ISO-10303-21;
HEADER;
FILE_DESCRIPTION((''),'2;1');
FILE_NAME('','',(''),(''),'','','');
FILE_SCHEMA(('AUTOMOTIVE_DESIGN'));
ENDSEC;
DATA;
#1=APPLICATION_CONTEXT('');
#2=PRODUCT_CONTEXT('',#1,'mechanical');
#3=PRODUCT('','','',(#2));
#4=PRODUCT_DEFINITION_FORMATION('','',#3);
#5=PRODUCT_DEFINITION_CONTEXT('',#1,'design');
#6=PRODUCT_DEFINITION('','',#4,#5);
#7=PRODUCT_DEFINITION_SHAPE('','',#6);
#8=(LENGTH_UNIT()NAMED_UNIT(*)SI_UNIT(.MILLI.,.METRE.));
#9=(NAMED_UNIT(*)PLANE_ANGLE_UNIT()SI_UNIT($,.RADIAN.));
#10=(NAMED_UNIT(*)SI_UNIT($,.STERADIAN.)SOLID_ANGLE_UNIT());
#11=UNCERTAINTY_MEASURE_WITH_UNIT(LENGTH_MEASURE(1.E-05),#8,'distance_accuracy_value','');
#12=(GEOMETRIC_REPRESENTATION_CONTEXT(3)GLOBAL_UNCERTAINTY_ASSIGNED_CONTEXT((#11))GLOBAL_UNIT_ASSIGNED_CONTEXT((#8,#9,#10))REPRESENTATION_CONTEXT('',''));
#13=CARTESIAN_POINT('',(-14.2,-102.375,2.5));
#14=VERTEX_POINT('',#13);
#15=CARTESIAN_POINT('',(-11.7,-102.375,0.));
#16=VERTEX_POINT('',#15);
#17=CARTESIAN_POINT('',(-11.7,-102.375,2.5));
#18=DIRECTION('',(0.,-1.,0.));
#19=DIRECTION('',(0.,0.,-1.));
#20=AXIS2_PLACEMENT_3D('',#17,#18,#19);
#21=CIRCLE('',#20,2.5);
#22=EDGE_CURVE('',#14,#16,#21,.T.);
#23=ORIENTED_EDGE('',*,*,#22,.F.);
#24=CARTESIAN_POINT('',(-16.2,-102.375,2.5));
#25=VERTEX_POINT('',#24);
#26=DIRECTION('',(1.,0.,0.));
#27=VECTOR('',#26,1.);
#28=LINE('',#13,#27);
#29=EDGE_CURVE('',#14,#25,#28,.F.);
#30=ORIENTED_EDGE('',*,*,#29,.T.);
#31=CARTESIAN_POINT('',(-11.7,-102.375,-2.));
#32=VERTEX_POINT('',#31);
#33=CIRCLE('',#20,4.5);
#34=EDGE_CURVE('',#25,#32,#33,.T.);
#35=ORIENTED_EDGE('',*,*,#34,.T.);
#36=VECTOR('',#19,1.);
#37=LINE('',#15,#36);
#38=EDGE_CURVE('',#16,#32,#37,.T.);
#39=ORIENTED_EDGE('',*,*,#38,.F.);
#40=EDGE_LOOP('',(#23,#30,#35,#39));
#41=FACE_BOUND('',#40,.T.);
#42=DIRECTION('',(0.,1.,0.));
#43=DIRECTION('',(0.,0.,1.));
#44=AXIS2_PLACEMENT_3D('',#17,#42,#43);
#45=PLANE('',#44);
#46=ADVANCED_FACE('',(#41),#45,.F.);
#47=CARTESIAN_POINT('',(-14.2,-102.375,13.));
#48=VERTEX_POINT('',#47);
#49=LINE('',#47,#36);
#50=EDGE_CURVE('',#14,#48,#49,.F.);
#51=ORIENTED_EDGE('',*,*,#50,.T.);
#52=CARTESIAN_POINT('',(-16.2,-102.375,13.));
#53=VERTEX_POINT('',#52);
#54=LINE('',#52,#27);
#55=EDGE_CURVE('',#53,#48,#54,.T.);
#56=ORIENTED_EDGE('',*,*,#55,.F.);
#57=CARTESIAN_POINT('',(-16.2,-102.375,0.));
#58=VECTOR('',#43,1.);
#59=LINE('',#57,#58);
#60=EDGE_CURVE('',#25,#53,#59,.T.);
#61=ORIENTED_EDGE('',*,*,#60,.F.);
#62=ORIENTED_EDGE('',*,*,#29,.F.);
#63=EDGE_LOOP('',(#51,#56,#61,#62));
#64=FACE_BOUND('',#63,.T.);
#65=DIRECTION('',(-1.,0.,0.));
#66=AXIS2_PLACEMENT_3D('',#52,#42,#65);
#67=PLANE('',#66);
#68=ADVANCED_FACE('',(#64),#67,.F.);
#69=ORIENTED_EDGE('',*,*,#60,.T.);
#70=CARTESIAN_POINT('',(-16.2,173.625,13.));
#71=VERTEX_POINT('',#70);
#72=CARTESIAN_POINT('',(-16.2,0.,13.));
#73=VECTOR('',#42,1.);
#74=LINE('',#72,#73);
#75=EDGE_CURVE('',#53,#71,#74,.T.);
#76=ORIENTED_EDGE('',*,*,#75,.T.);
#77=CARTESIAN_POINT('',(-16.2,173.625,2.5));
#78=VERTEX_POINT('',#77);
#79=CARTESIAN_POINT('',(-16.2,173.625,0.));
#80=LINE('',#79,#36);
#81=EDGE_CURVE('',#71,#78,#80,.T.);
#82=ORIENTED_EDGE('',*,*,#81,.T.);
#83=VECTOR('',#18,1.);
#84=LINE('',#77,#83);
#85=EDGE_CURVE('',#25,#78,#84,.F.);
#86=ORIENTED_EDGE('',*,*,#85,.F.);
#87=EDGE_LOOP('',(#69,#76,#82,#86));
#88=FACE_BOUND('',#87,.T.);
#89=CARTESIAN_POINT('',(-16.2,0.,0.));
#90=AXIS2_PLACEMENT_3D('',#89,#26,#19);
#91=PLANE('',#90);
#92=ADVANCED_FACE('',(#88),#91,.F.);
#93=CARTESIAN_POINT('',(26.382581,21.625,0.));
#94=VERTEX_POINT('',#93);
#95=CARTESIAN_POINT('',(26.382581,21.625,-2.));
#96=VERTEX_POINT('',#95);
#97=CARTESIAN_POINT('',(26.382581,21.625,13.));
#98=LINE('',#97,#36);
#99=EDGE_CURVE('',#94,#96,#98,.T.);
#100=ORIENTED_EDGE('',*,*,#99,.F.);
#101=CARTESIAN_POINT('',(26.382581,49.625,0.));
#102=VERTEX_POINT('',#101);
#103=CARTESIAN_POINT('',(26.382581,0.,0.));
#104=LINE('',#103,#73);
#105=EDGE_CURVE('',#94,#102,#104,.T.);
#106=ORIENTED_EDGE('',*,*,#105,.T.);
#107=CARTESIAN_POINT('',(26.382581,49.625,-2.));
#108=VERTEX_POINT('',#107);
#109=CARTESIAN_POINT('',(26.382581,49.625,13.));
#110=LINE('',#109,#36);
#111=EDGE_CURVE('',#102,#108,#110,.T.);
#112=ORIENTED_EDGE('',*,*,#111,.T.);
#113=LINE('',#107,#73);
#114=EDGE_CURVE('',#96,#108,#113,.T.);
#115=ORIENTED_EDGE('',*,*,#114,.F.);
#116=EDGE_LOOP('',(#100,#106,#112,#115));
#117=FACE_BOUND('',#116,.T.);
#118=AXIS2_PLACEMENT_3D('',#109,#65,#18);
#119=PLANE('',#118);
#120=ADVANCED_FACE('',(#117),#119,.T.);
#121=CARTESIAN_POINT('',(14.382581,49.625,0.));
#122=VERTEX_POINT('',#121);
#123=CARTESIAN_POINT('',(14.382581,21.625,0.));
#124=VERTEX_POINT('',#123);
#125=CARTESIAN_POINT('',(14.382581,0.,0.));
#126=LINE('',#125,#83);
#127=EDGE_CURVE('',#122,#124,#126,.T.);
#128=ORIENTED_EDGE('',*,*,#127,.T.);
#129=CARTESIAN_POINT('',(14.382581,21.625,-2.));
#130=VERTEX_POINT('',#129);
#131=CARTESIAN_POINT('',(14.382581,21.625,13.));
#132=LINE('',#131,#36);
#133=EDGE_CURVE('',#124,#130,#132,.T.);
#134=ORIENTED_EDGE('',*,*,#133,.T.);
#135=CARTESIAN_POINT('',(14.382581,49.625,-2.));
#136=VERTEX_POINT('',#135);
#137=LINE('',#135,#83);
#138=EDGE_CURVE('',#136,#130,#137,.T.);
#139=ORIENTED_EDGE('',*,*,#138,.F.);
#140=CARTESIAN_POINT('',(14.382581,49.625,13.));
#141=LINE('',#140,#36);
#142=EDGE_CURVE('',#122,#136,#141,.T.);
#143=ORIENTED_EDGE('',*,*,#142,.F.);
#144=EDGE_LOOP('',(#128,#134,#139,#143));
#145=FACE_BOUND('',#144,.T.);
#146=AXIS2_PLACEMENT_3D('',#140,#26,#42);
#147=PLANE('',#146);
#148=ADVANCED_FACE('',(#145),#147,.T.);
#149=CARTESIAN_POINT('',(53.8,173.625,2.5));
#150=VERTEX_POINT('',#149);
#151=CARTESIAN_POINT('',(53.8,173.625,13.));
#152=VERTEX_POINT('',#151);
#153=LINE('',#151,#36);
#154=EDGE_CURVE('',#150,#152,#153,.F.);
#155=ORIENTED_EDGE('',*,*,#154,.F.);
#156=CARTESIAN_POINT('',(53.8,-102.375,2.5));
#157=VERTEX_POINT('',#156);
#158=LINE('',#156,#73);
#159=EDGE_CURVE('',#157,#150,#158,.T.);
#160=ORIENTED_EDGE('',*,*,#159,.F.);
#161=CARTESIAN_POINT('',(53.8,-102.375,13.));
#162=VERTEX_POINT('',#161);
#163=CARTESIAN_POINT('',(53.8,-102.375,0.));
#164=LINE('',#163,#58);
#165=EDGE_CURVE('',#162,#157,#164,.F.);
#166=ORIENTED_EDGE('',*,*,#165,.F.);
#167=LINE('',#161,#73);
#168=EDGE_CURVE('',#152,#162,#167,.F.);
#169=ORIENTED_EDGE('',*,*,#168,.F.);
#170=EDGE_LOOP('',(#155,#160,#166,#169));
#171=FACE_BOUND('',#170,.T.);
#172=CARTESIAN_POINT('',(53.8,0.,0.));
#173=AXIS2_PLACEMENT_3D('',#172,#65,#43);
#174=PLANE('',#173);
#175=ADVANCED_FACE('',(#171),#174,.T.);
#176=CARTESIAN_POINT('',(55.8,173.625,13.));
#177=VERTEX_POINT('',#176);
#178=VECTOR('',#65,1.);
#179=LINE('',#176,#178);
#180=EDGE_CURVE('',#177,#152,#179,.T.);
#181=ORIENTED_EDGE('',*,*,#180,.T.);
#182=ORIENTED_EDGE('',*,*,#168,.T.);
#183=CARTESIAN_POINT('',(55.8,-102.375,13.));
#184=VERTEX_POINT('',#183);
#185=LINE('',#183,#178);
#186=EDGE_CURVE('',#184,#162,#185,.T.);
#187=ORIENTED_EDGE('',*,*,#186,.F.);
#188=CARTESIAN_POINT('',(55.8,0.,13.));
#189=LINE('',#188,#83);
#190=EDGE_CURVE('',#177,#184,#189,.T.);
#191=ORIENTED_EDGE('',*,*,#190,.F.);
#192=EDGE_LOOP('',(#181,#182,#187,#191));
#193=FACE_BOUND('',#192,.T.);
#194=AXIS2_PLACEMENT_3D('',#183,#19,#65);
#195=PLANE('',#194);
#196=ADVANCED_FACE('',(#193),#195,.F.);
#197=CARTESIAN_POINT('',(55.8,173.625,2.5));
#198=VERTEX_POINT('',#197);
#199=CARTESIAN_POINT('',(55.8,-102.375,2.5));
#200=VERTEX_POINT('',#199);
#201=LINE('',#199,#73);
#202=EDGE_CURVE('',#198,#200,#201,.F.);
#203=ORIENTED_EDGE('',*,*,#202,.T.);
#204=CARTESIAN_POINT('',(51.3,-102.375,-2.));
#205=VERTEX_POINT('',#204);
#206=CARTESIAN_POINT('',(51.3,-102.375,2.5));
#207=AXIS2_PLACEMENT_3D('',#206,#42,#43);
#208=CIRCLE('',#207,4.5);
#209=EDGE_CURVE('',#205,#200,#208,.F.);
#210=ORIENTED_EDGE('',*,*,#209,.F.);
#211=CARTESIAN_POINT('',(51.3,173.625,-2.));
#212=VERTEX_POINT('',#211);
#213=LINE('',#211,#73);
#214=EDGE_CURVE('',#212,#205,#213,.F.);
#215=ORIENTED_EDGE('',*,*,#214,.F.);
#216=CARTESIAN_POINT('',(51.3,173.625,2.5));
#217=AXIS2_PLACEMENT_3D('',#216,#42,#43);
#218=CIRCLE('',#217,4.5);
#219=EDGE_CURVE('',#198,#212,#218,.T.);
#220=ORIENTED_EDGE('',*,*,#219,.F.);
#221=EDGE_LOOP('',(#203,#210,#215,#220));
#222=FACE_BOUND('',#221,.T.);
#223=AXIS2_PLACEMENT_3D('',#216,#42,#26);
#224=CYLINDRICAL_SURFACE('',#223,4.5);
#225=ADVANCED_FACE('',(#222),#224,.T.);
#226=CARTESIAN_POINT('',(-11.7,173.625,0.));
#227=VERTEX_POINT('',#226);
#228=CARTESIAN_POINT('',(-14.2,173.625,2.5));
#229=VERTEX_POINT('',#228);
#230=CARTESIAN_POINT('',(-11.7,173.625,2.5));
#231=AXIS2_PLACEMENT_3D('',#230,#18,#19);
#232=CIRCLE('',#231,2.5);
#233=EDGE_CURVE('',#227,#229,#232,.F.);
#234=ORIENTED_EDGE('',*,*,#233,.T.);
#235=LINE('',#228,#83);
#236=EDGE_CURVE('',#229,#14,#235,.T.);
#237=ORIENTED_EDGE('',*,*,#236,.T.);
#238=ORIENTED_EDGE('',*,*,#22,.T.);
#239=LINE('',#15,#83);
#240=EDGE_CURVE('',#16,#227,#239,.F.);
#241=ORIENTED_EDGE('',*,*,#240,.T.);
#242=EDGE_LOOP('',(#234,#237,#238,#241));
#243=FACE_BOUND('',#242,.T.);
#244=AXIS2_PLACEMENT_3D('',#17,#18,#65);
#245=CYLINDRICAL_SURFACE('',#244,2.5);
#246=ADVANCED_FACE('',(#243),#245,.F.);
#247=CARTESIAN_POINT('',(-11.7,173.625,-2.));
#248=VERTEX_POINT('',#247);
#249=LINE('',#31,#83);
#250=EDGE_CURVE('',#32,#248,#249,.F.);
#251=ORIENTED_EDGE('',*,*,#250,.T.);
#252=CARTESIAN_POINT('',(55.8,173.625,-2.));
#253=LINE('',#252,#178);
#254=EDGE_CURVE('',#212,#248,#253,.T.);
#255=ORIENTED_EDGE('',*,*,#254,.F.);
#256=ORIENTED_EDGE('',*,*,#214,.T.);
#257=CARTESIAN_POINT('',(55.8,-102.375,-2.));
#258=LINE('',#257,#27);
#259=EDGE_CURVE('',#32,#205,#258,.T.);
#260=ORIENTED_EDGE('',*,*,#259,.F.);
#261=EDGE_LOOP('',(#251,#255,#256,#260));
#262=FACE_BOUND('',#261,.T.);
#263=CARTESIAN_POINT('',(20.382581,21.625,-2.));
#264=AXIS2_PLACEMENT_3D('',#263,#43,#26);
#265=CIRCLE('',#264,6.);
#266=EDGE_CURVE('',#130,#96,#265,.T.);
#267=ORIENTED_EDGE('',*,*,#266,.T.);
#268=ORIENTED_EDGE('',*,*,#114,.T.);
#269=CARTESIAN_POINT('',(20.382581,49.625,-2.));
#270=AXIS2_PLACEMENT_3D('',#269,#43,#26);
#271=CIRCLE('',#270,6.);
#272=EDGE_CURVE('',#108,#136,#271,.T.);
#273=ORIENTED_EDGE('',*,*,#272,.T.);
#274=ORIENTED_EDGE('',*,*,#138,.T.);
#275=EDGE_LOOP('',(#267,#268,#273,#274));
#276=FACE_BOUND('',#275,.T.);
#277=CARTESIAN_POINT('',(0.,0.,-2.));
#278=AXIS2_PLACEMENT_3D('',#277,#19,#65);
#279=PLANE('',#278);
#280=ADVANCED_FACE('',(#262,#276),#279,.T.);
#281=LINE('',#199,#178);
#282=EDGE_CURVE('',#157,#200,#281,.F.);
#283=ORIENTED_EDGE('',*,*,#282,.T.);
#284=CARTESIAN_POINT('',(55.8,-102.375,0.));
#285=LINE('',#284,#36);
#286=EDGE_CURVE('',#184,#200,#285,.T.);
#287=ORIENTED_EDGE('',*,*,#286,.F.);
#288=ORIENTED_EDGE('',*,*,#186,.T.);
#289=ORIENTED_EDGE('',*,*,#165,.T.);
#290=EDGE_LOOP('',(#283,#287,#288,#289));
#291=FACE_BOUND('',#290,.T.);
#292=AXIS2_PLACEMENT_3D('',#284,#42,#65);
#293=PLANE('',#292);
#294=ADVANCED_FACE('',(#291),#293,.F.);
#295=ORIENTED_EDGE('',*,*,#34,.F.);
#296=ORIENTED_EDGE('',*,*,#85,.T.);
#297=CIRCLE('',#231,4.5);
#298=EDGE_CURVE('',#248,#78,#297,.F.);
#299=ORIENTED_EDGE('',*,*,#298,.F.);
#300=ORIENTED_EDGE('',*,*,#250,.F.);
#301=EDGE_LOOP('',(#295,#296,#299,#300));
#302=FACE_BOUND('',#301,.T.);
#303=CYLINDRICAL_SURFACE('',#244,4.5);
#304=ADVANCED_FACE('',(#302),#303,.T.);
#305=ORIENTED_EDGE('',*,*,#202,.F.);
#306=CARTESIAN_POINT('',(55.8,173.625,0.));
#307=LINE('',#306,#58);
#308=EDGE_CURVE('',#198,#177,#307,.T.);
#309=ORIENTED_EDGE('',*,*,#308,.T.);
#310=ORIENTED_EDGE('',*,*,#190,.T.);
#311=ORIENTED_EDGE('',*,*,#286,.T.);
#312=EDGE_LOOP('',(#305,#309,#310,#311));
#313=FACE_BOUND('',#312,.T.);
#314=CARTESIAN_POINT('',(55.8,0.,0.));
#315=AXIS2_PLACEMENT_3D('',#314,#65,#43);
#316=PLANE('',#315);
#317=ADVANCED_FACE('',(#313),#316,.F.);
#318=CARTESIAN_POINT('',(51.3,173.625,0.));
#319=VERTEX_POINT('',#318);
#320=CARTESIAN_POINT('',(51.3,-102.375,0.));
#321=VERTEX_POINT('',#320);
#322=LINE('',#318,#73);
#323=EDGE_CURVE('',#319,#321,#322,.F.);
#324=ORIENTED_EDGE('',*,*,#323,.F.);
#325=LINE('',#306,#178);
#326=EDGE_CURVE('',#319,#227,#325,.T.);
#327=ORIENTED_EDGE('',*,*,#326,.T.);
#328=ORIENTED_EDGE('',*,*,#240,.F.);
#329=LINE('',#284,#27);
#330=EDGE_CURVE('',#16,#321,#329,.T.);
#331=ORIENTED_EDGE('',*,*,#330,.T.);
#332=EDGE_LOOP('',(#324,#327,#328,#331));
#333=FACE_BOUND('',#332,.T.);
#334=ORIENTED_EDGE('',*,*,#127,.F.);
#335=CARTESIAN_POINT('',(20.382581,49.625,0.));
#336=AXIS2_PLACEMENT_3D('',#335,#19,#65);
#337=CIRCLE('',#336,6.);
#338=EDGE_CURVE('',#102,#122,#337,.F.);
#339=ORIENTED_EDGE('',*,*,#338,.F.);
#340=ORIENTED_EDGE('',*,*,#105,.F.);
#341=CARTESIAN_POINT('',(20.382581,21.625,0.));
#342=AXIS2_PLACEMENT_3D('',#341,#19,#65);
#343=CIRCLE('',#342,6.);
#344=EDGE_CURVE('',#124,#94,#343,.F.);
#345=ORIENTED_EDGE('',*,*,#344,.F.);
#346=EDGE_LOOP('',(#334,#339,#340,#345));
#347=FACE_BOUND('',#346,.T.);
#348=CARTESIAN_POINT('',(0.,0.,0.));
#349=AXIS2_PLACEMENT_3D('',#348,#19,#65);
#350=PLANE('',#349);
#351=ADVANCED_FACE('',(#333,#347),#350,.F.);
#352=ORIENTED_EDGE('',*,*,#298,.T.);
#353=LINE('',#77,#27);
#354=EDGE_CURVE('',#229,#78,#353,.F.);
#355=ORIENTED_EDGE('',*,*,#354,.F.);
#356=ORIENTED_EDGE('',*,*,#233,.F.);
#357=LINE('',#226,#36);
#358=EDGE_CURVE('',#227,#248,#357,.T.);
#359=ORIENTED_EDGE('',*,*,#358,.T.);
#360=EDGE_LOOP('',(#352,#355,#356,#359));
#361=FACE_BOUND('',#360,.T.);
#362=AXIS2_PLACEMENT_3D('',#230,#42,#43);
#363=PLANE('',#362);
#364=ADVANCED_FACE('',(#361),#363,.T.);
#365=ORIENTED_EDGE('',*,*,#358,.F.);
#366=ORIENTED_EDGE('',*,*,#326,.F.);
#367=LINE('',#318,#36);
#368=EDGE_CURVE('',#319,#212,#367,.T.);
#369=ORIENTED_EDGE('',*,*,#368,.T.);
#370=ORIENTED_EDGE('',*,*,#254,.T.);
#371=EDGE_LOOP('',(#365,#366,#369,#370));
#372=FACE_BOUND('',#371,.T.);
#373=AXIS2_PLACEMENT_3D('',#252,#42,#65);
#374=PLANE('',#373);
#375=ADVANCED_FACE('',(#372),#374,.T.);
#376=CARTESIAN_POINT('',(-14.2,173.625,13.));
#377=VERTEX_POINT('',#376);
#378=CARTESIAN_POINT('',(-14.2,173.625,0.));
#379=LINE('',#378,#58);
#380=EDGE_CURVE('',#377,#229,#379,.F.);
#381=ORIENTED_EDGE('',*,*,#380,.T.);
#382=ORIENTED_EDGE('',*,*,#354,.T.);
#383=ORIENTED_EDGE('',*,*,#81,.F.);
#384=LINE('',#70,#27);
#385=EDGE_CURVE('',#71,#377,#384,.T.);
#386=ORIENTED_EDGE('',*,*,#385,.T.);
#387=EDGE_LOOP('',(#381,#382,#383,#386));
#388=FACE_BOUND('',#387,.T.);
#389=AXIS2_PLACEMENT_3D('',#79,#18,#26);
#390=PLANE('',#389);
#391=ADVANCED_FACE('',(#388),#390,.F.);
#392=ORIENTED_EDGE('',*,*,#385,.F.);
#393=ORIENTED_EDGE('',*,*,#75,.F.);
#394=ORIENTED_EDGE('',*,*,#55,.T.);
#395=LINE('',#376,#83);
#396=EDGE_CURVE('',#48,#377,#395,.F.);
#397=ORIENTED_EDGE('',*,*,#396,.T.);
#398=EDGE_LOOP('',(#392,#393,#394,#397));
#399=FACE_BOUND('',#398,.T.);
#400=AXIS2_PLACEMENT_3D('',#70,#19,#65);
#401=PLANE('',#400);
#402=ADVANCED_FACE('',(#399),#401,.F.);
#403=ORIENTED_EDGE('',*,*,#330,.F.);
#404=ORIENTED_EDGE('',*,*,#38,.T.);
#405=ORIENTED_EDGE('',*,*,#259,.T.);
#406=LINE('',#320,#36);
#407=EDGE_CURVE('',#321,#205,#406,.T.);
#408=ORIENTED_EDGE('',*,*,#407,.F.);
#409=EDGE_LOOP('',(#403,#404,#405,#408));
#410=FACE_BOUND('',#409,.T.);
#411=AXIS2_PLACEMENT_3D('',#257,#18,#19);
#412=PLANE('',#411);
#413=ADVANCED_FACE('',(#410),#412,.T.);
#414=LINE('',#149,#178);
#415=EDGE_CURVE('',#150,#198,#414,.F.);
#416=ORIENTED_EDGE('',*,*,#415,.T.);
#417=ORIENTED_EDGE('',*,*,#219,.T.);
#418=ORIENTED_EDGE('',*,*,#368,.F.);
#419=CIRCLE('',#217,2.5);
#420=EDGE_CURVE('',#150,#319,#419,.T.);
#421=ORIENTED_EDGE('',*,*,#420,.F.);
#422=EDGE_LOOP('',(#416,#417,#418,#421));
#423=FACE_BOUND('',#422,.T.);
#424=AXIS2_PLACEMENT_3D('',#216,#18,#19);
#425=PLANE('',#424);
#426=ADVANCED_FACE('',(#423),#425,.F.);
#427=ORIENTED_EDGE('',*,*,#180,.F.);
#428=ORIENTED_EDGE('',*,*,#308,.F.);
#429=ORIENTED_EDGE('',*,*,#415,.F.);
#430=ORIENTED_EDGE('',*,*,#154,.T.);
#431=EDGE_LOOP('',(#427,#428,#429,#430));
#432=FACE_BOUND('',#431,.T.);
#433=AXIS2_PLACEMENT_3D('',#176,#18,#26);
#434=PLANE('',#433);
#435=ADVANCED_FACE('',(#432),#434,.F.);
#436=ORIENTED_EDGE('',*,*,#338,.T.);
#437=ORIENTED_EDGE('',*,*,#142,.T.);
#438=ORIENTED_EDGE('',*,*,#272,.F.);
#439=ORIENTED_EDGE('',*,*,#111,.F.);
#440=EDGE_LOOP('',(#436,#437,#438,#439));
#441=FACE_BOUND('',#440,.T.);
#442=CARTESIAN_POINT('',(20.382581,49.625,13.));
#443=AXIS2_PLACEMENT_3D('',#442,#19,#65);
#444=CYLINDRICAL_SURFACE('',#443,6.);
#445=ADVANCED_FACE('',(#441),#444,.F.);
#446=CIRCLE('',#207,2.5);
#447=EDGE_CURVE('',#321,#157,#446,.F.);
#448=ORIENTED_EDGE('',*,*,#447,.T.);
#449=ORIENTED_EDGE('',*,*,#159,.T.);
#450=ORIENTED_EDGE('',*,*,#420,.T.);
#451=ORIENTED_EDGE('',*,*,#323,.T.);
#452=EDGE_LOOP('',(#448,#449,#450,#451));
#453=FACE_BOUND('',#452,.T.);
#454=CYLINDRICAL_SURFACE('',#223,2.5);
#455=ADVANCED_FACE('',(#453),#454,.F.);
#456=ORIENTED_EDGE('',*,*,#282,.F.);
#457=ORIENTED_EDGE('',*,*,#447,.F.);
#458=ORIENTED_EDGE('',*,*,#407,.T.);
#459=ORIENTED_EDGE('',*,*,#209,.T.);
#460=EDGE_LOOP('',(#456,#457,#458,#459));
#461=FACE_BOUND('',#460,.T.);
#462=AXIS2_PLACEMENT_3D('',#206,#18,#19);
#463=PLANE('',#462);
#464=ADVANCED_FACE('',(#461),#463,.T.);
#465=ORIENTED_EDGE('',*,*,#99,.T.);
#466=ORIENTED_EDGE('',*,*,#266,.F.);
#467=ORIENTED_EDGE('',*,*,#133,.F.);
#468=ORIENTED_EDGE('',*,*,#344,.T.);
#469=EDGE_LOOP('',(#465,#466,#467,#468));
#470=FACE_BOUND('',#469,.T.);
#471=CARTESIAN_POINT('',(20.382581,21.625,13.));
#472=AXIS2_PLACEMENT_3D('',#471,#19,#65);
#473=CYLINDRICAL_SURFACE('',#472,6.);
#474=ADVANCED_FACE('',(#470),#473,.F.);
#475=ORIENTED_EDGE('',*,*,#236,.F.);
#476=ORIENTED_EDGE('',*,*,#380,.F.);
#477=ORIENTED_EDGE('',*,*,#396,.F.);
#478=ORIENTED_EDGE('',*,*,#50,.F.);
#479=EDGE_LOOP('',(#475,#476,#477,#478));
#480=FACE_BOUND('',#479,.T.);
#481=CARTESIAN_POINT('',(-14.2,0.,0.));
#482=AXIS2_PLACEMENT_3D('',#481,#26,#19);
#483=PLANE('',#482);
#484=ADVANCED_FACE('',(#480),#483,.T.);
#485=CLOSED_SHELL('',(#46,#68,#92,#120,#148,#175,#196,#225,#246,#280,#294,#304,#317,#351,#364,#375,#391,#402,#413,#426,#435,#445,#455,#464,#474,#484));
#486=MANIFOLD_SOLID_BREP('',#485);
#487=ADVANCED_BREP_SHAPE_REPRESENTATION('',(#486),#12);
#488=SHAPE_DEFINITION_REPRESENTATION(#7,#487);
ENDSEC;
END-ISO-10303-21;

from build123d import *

# Parameters (mm, degrees)
SKETCH1_W                    = 72
SKETCH1_H                    = 276
BASE_FLANGE1_DEPTH           = 2
EDGE_FLANGE1_STRIP_W         = 13
EDGE_FLANGE1_STRIP_H         = 2
EDGE_FLANGE1_STRIP_CUT_DEPTH = 276
EDGE_FLANGE1_DEPTH           = 276
EDGE_FLANGE2_STRIP_W         = 13
EDGE_FLANGE2_STRIP_H         = 2
EDGE_FLANGE2_STRIP_CUT_DEPTH = 276
EDGE_FLANGE2_DEPTH           = 276
CUT_EXTRUDE1_DEPTH           = 183.834024801
CUT_EXTRUDE1_DEPTH_BACK      = 183.834024801


# Sheet-metal steps are written as plain solids
with BuildPart() as part:
    # Sketch1 → Base-Flange1 (new body)
    with BuildSketch(Plane.XY):
        with Locations((19.8, 35.625)):
            Rectangle(SKETCH1_W, SKETCH1_H)
    extrude(amount=-BASE_FLANGE1_DEPTH)

    # Edge-Flange1 strip (across the edge) → Edge-Flange1 strip cut (cut)
    with BuildSketch(Plane(origin=(55.8, -102.375, 0), x_dir=(-1, 0, 0), z_dir=(0, 1, 0))):
        with Locations((-2, -1)):
            Rectangle(EDGE_FLANGE1_STRIP_W, EDGE_FLANGE1_STRIP_H)
    extrude(amount=EDGE_FLANGE1_STRIP_CUT_DEPTH, mode=Mode.SUBTRACT)

    # Edge-Flange1 section (across the edge) → Edge-Flange1 (add)
    with BuildSketch(Plane(origin=(55.8, -102.375, 0), x_dir=(-1, 0, 0), z_dir=(0, 1, 0))):
        with BuildLine():
            Line((0, 2.5), (0, 13))
            Line((0, 13), (2, 13))
            Line((2, 13), (2, 2.5))
            ThreePointArc((2, 2.5), (2.732233047, 0.732233047), (4.5, 0))
            Line((4.5, 0), (4.5, -2))
            ThreePointArc((4.5, -2), (1.318019485, -0.681980515), (0, 2.5))
        make_face()
    extrude(amount=EDGE_FLANGE1_DEPTH)

    # Edge-Flange2 strip (across the edge) → Edge-Flange2 strip cut (cut)
    with BuildSketch(Plane(origin=(-16.2, 173.625, 0), x_dir=(1, 0, 0), z_dir=(0, -1, 0))):
        with Locations((-2, -1)):
            Rectangle(EDGE_FLANGE2_STRIP_W, EDGE_FLANGE2_STRIP_H)
    extrude(amount=EDGE_FLANGE2_STRIP_CUT_DEPTH, mode=Mode.SUBTRACT)

    # Edge-Flange2 section (across the edge) → Edge-Flange2 (add)
    with BuildSketch(Plane(origin=(-16.2, 173.625, 0), x_dir=(1, 0, 0), z_dir=(0, -1, 0))):
        with BuildLine():
            Line((0, 2.5), (0, 13))
            Line((0, 13), (2, 13))
            Line((2, 13), (2, 2.5))
            ThreePointArc((2, 2.5), (2.732233047, 0.732233047), (4.5, 0))
            Line((4.5, 0), (4.5, -2))
            ThreePointArc((4.5, -2), (1.318019485, -0.681980515), (0, 2.5))
        make_face()
    extrude(amount=EDGE_FLANGE2_DEPTH)

    # Sketch12 → Cut-Extrude1 (cut, two sides: drawn at the far end of the back side and taken through both)
    with BuildSketch(Plane.XY.offset(-CUT_EXTRUDE1_DEPTH_BACK)):
        with BuildLine():
            Line((26.38258059, 49.625), (26.38258059, 21.625))
            ThreePointArc((26.38258059, 21.625), (20.38258059, 15.625), (14.38258059, 21.625))
            Line((14.38258059, 21.625), (14.38258059, 49.625))
            ThreePointArc((14.38258059, 49.625), (20.38258059, 55.625), (26.38258059, 49.625))
        make_face()
    extrude(amount=CUT_EXTRUDE1_DEPTH + CUT_EXTRUDE1_DEPTH_BACK, mode=Mode.SUBTRACT)


solid = part.part
